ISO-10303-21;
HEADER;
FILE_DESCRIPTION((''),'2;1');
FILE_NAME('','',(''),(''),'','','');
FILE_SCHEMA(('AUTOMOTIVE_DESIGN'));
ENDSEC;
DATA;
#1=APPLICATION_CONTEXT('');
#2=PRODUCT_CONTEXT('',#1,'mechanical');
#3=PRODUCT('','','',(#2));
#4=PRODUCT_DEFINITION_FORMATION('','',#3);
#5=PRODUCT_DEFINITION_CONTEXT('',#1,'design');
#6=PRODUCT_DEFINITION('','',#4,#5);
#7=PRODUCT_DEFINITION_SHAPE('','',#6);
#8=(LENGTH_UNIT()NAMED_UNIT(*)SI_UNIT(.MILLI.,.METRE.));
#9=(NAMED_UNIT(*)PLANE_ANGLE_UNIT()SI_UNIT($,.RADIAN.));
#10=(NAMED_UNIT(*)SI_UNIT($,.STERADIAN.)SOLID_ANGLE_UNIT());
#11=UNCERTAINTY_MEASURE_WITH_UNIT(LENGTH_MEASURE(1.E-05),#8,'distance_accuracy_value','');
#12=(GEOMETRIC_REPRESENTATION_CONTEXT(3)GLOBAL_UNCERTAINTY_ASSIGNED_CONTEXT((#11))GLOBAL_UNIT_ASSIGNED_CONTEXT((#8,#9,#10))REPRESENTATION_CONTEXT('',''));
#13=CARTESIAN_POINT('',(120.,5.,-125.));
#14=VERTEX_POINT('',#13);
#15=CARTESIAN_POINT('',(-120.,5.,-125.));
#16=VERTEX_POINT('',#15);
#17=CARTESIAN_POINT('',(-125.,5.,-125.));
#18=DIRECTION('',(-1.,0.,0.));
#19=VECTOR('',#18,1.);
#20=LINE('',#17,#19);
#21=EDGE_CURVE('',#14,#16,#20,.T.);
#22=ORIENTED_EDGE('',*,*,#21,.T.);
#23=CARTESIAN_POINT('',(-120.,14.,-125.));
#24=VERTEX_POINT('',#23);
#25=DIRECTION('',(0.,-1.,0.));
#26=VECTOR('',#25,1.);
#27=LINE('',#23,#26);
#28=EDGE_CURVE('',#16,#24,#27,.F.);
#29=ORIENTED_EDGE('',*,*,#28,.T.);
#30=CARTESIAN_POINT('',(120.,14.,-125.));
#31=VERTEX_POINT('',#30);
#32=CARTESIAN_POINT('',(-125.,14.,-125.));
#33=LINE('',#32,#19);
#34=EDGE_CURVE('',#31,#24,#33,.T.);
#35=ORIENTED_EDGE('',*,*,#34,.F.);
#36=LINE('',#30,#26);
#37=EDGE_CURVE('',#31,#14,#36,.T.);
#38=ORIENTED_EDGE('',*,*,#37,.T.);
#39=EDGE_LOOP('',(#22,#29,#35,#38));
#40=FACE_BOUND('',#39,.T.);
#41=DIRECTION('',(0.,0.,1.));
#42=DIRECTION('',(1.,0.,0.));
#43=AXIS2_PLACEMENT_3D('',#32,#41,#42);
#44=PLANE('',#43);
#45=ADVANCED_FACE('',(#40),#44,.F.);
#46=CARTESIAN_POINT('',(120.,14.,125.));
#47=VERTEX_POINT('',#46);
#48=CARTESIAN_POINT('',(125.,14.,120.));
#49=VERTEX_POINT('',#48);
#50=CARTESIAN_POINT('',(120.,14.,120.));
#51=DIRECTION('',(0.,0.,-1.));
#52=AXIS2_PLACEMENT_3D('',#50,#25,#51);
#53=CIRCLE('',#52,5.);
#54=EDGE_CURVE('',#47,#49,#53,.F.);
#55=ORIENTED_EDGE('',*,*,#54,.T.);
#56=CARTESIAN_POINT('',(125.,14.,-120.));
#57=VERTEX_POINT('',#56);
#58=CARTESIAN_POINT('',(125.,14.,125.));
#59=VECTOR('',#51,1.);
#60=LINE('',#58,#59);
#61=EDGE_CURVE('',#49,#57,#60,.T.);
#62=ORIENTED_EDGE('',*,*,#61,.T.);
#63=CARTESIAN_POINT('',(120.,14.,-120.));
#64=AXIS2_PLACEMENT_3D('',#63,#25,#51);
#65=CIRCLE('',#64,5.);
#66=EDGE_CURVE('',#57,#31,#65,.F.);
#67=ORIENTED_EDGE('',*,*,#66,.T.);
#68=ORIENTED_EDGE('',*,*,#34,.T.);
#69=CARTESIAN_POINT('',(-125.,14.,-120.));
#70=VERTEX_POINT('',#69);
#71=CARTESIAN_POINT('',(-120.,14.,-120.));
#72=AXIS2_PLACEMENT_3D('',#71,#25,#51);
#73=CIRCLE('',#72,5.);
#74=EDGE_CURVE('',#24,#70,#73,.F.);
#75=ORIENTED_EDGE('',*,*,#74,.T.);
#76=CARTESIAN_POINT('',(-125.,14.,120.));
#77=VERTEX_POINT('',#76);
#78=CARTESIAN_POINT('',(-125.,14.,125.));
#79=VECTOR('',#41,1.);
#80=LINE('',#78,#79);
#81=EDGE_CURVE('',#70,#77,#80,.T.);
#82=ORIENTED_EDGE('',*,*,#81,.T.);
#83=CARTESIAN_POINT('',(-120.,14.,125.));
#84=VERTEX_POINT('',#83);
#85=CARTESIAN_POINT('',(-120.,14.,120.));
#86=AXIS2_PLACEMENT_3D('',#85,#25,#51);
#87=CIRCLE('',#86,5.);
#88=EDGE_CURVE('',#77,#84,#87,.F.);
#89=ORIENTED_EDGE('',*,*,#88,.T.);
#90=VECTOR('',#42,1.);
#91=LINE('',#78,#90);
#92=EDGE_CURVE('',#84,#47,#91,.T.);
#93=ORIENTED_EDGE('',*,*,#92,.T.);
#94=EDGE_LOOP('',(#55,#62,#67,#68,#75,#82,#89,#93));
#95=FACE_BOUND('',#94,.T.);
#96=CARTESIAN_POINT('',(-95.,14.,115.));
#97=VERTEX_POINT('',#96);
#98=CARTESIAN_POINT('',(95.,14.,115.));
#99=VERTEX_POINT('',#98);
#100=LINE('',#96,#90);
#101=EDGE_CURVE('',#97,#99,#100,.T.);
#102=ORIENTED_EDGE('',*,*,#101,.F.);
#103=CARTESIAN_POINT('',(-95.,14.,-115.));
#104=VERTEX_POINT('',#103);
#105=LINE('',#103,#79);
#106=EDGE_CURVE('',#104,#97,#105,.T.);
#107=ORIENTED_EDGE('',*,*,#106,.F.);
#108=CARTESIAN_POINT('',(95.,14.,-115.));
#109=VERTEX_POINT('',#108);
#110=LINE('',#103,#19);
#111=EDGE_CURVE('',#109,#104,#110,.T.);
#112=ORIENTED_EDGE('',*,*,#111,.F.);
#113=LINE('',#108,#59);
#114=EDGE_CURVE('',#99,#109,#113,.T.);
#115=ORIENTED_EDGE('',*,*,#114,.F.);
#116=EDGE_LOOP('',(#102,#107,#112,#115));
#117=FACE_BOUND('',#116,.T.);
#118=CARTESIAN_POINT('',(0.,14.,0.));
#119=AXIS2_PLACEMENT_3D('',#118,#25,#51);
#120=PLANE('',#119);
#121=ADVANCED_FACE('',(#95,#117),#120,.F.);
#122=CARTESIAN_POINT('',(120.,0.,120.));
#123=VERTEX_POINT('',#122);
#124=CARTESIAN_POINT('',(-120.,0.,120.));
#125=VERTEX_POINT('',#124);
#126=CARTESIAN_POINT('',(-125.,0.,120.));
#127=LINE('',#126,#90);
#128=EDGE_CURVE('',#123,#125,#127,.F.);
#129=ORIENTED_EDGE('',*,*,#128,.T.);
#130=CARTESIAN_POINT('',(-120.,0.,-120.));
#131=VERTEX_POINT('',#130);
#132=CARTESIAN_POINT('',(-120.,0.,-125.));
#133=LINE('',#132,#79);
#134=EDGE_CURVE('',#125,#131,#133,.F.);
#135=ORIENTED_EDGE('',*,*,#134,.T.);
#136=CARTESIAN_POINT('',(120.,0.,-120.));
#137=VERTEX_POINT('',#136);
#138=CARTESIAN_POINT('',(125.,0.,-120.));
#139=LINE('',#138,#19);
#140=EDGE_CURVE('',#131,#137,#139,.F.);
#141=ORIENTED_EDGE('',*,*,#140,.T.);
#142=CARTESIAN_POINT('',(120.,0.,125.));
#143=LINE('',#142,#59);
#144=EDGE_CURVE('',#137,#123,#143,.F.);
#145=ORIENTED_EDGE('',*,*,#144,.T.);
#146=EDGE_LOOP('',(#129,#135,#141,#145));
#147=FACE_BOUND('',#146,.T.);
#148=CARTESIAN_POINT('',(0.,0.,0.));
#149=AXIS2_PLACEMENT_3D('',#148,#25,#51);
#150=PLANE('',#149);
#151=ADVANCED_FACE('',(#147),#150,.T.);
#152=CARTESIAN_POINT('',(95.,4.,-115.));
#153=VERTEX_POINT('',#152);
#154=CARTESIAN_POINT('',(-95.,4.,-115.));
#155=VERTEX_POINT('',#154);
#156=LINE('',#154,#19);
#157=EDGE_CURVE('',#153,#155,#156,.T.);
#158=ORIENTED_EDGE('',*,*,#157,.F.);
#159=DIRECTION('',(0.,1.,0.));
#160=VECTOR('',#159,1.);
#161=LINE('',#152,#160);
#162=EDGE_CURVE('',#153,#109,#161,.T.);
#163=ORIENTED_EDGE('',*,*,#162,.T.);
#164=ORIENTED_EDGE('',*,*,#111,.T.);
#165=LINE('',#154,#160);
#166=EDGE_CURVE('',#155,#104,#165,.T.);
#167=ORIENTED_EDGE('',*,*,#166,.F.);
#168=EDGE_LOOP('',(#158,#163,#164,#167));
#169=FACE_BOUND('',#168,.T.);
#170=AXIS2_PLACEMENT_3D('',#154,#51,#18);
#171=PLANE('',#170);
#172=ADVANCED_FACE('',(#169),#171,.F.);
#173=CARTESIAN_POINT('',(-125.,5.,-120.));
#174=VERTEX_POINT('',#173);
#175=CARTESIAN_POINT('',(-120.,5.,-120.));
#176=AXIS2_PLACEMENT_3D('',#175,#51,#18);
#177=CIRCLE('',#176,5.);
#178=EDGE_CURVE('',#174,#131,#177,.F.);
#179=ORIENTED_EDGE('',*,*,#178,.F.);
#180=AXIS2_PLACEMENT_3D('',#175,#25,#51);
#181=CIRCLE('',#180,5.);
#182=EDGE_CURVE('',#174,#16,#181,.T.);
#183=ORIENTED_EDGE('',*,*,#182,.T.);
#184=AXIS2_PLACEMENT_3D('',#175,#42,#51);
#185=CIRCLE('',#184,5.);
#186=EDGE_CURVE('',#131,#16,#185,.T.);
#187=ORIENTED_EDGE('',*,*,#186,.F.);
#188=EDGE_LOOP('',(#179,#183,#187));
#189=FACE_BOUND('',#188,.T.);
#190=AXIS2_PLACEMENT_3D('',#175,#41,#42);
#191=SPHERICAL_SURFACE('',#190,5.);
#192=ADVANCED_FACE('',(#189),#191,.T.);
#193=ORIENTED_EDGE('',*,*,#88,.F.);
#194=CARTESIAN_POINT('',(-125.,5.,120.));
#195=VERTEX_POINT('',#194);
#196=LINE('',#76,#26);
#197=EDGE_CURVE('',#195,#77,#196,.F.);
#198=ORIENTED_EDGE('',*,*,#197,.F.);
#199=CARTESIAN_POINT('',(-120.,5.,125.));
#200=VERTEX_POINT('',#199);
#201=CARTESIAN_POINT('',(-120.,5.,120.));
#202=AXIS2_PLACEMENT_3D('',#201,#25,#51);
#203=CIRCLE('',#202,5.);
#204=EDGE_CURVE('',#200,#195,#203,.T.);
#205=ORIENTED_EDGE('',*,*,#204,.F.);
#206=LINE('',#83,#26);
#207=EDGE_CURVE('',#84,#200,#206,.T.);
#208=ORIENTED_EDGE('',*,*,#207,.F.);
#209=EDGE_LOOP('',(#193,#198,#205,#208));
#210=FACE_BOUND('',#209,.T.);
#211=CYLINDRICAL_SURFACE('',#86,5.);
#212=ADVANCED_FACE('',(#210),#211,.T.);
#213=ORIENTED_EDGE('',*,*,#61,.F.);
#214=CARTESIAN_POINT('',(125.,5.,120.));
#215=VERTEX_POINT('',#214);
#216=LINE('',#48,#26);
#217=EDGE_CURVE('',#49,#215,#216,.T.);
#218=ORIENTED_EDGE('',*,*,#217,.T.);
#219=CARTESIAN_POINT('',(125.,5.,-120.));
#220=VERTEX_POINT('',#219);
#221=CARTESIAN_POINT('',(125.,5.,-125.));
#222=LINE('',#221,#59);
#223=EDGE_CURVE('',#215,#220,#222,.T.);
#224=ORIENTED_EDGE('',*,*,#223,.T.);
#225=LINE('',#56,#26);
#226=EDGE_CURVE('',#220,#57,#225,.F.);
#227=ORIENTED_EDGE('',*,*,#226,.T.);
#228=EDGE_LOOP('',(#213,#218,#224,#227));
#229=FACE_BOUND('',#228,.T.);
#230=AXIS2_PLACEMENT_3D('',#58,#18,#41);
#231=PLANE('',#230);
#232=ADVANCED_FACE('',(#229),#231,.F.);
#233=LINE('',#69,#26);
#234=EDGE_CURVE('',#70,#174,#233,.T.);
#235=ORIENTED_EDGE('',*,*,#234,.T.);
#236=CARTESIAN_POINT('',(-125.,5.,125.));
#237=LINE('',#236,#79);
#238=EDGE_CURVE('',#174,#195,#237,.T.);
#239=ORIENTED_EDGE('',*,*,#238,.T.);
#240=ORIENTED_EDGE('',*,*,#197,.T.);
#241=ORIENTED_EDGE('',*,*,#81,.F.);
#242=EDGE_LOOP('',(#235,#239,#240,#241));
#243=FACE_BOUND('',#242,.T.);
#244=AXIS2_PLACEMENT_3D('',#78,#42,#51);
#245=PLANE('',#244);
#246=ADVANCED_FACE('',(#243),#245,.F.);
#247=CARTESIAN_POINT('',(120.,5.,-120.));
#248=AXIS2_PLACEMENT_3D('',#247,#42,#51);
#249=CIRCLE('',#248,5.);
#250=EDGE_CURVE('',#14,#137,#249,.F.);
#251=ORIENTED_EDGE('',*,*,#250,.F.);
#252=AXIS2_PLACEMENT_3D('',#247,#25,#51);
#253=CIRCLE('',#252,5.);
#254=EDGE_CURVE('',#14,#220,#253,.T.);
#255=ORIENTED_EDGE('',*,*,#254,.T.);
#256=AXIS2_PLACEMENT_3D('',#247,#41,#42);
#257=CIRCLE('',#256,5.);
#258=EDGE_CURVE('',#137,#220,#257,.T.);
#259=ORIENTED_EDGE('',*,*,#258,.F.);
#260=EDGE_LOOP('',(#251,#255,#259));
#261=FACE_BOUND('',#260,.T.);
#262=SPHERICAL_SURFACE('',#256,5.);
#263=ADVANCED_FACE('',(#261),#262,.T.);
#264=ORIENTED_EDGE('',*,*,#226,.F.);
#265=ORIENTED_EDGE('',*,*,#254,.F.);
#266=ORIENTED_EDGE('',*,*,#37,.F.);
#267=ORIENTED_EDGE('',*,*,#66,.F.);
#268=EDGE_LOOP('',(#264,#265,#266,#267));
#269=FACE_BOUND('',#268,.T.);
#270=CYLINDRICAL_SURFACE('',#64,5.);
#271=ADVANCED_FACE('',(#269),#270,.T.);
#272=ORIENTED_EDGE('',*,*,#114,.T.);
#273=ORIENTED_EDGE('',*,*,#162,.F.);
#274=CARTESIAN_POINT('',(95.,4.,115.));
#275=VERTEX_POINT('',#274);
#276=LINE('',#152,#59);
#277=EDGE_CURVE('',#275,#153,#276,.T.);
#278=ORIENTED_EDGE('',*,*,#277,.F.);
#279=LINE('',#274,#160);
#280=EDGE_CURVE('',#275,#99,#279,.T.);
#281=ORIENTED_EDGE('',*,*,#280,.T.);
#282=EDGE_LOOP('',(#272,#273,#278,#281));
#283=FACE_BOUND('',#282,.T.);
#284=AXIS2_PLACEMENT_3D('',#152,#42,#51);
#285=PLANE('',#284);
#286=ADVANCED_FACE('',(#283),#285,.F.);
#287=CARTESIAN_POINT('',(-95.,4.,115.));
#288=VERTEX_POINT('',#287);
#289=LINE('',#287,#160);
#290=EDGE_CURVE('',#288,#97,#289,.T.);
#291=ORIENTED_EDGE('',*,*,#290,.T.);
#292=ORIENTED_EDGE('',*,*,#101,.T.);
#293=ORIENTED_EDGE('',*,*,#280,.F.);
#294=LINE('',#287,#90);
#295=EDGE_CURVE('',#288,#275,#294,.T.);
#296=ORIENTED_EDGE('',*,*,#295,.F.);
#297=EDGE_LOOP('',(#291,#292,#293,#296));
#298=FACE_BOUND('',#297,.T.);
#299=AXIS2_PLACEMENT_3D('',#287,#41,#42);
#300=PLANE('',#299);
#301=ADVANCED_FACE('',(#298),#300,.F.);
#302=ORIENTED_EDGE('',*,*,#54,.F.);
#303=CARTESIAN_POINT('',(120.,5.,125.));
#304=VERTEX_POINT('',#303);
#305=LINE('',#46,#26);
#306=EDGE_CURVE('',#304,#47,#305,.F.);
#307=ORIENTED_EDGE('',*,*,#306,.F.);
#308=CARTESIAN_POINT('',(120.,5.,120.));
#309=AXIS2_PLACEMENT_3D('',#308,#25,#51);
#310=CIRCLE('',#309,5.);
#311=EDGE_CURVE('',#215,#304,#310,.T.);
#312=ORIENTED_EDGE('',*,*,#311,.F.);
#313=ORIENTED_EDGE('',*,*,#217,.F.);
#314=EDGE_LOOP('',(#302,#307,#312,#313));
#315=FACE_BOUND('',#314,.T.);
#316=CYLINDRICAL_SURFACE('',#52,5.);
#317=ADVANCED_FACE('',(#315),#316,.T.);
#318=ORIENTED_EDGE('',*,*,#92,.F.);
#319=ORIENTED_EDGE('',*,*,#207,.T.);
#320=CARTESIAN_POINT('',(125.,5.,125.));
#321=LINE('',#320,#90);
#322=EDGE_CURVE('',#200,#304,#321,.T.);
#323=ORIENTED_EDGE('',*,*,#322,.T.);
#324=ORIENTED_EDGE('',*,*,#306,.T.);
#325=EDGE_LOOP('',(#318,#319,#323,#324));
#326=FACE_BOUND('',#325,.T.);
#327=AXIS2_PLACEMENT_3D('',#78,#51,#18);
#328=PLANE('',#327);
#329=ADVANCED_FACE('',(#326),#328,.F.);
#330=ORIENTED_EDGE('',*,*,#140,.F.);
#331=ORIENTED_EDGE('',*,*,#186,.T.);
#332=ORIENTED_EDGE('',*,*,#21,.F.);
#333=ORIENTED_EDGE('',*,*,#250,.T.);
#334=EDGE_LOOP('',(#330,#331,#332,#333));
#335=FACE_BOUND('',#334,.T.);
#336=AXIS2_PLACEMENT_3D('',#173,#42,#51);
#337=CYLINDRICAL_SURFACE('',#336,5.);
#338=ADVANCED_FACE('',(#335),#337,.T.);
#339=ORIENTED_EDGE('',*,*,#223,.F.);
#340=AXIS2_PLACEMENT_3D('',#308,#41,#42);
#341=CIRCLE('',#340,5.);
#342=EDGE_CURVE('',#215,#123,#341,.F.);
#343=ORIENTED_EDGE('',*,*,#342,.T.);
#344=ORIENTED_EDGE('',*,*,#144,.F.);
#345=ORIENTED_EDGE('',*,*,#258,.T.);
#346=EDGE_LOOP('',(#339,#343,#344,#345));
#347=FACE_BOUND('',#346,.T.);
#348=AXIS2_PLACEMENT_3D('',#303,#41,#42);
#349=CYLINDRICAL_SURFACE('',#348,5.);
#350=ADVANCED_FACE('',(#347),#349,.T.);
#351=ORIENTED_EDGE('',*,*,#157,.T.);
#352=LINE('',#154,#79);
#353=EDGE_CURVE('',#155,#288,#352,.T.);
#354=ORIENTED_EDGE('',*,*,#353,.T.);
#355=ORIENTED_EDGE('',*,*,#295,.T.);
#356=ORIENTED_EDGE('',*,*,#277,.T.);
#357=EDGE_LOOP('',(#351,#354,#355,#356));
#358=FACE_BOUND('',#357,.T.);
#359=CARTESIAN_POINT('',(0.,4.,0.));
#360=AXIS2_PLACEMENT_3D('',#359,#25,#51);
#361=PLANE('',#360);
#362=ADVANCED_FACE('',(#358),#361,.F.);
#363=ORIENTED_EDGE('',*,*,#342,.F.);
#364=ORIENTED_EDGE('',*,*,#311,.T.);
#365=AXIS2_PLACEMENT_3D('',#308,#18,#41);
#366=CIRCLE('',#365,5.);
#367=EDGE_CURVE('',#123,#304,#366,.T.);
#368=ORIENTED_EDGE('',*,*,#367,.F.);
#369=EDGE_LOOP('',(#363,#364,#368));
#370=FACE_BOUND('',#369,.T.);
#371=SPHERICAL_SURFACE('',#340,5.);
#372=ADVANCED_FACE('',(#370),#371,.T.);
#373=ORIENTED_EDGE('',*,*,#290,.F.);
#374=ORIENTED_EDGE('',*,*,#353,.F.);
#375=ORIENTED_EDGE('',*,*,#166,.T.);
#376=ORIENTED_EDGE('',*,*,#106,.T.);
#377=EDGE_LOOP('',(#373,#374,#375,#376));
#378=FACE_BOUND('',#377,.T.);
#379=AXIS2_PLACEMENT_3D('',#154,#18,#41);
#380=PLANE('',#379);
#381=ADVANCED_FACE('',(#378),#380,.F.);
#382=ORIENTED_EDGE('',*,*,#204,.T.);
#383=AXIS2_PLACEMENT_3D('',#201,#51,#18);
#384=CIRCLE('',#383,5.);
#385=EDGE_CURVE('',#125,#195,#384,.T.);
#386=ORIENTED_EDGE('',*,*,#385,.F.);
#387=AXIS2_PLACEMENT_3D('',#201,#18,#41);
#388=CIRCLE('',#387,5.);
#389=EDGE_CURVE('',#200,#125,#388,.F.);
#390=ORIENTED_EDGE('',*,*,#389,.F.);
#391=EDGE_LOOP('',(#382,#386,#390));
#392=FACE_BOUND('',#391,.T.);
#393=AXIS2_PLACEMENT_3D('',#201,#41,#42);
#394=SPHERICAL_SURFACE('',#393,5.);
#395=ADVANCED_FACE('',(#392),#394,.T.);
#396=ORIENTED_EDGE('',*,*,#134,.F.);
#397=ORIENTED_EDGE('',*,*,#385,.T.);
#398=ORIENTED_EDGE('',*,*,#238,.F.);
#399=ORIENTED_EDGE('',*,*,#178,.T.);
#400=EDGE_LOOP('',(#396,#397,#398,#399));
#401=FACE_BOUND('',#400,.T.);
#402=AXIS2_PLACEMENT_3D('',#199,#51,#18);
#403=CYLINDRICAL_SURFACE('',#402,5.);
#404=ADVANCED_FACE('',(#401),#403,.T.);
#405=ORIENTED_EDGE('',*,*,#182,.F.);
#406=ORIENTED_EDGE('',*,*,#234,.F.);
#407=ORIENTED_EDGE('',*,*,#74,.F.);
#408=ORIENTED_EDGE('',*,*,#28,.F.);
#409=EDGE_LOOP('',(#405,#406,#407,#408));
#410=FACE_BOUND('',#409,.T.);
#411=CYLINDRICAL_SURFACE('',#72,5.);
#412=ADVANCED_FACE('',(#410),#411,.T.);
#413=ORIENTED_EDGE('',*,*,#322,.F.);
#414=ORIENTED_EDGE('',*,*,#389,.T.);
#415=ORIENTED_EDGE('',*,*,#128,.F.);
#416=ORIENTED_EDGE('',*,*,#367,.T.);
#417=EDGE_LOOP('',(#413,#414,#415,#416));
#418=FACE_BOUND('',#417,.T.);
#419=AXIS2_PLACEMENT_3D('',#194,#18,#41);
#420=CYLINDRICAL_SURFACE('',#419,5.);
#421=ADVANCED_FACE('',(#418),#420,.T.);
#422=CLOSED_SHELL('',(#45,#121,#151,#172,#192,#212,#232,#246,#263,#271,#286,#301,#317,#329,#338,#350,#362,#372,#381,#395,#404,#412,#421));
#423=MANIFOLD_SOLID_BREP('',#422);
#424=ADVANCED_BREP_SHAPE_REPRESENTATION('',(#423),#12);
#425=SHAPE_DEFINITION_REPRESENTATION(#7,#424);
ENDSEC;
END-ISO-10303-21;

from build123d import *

# Parameters (mm, degrees)
SKETCH1_W          = 250
SKETCH1_H          = 250
BASE_DEPTH         = 14
SKETCH3_W          = 190
SKETCH3_H          = 230
CUT_EXTRUDE1_DEPTH = 10
FILLET1_R          = 5
FILLET2_R          = 5


with BuildPart() as part:
    # Sketch1 → Base (new body)
    with BuildSketch(Plane(origin=(0, 0, 0), x_dir=(1, 0, 0), z_dir=(0, 1, 0))):
        Rectangle(SKETCH1_W, SKETCH1_H)
    extrude(amount=BASE_DEPTH)

    # Sketch3 → Cut-Extrude1 (cut)
    with BuildSketch(Plane(origin=(0, 14, 0), x_dir=(1, 0, 0), z_dir=(0, 1, 0))):
        Rectangle(SKETCH3_W, SKETCH3_H)
    extrude(amount=-CUT_EXTRUDE1_DEPTH, mode=Mode.SUBTRACT)

    # Fillet1
    fillet1_edges = [part.edges().sort_by_distance(p)[0] for p in [
        (0, 0, 125),
        (-125, 0, 0),
        (0, 0, -125),
        (125, 0, 0),
    ]]
    fillet(fillet1_edges, radius=FILLET1_R)

    # Fillet2
    # the kernel refuses this fillet: 5 mm, written as the material it takes off along each edge
    with BuildSketch(Plane(origin=(120, 5, 120), x_dir=(1, 0, 0), z_dir=(0, 0, 1))) as fillet2_piece_1_section:
        Polygon((0, 0), (FILLET2_R, 0), (FILLET2_R, -FILLET2_R), (0, -FILLET2_R), align=None)
    fillet2_piece_1 = extrude(amount=FILLET2_R, mode=Mode.PRIVATE)
    fillet2_piece_1 = fillet2_piece_1 - Plane(origin=(120, 5, 120), x_dir=(-0.7071067811865475, 0.7071067811865475, 0), z_dir=(0, 0, 1)) * Sphere(FILLET2_R, mode=Mode.PRIVATE)
    add(fillet2_piece_1, mode=Mode.SUBTRACT)
    with BuildSketch(Plane(origin=(-120, 5, 120), x_dir=(-1, 0, 0), z_dir=(0, 0, 1))) as fillet2_piece_2_section:
        Polygon((0, 0), (FILLET2_R, 0), (FILLET2_R, FILLET2_R), (0, FILLET2_R), align=None)
    fillet2_piece_2 = extrude(amount=FILLET2_R, mode=Mode.PRIVATE)
    fillet2_piece_2 = fillet2_piece_2 - Plane(origin=(-120, 5, 120), x_dir=(0.7071067811865475, 0.7071067811865475, 0), z_dir=(0, 0, 1)) * Sphere(FILLET2_R, mode=Mode.PRIVATE)
    add(fillet2_piece_2, mode=Mode.SUBTRACT)
    with BuildSketch(Plane(origin=(120, 5, -120), x_dir=(0, 0, -1), z_dir=(1, 0, 0))) as fillet2_piece_3_section:
        Polygon((0, 0), (FILLET2_R, 0), (FILLET2_R, -FILLET2_R), (0, -FILLET2_R), align=None)
    fillet2_piece_3 = extrude(amount=FILLET2_R, mode=Mode.PRIVATE)
    fillet2_piece_3 = fillet2_piece_3 - Plane(origin=(120, 5, -120), x_dir=(0, 0.7071067811865475, 0.7071067811865475), z_dir=(1, 0, 0)) * Sphere(FILLET2_R, mode=Mode.PRIVATE)
    add(fillet2_piece_3, mode=Mode.SUBTRACT)
    with BuildSketch(Plane(origin=(-120, 5, -120), x_dir=(0, 0, -1), z_dir=(-1, 0, 0))) as fillet2_piece_4_section:
        Polygon((0, 0), (FILLET2_R, 0), (FILLET2_R, FILLET2_R), (0, FILLET2_R), align=None)
    fillet2_piece_4 = extrude(amount=FILLET2_R, mode=Mode.PRIVATE)
    fillet2_piece_4 = fillet2_piece_4 - Plane(origin=(-120, 5, -120), x_dir=(0, 0.7071067811865475, 0.7071067811865475), z_dir=(-1, 0, 0)) * Sphere(FILLET2_R, mode=Mode.PRIVATE)
    add(fillet2_piece_4, mode=Mode.SUBTRACT)
    with BuildSketch(Plane(origin=(125, 5, 125), x_dir=(-1, 0, 0), z_dir=(0, 1, 0)), Plane(origin=(125, 5, -125), x_dir=(0, 0, 1), z_dir=(0, 1, 0))) as fillet2_piece_5:
        with BuildLine():
            CenterArc((FILLET2_R, -FILLET2_R), FILLET2_R, 90, 90)
            Line((0, -FILLET2_R), (0, 0))
            Line((0, 0), (FILLET2_R, 0))
        make_face()
    extrude(amount=21.5, mode=Mode.SUBTRACT)
    with BuildSketch(Plane(origin=(-125, 5, 125), x_dir=(1, 0, 0), z_dir=(0, 1, 0)), Plane(origin=(-125, 5, -125), x_dir=(0, 0, 1), z_dir=(0, 1, 0))) as fillet2_piece_6:
        with BuildLine():
            CenterArc((FILLET2_R, FILLET2_R), FILLET2_R, 180, 90)
            Line((0, FILLET2_R), (0, 0))
            Line((0, 0), (FILLET2_R, 0))
        make_face()
    extrude(amount=21.5, mode=Mode.SUBTRACT)


solid = part.part
